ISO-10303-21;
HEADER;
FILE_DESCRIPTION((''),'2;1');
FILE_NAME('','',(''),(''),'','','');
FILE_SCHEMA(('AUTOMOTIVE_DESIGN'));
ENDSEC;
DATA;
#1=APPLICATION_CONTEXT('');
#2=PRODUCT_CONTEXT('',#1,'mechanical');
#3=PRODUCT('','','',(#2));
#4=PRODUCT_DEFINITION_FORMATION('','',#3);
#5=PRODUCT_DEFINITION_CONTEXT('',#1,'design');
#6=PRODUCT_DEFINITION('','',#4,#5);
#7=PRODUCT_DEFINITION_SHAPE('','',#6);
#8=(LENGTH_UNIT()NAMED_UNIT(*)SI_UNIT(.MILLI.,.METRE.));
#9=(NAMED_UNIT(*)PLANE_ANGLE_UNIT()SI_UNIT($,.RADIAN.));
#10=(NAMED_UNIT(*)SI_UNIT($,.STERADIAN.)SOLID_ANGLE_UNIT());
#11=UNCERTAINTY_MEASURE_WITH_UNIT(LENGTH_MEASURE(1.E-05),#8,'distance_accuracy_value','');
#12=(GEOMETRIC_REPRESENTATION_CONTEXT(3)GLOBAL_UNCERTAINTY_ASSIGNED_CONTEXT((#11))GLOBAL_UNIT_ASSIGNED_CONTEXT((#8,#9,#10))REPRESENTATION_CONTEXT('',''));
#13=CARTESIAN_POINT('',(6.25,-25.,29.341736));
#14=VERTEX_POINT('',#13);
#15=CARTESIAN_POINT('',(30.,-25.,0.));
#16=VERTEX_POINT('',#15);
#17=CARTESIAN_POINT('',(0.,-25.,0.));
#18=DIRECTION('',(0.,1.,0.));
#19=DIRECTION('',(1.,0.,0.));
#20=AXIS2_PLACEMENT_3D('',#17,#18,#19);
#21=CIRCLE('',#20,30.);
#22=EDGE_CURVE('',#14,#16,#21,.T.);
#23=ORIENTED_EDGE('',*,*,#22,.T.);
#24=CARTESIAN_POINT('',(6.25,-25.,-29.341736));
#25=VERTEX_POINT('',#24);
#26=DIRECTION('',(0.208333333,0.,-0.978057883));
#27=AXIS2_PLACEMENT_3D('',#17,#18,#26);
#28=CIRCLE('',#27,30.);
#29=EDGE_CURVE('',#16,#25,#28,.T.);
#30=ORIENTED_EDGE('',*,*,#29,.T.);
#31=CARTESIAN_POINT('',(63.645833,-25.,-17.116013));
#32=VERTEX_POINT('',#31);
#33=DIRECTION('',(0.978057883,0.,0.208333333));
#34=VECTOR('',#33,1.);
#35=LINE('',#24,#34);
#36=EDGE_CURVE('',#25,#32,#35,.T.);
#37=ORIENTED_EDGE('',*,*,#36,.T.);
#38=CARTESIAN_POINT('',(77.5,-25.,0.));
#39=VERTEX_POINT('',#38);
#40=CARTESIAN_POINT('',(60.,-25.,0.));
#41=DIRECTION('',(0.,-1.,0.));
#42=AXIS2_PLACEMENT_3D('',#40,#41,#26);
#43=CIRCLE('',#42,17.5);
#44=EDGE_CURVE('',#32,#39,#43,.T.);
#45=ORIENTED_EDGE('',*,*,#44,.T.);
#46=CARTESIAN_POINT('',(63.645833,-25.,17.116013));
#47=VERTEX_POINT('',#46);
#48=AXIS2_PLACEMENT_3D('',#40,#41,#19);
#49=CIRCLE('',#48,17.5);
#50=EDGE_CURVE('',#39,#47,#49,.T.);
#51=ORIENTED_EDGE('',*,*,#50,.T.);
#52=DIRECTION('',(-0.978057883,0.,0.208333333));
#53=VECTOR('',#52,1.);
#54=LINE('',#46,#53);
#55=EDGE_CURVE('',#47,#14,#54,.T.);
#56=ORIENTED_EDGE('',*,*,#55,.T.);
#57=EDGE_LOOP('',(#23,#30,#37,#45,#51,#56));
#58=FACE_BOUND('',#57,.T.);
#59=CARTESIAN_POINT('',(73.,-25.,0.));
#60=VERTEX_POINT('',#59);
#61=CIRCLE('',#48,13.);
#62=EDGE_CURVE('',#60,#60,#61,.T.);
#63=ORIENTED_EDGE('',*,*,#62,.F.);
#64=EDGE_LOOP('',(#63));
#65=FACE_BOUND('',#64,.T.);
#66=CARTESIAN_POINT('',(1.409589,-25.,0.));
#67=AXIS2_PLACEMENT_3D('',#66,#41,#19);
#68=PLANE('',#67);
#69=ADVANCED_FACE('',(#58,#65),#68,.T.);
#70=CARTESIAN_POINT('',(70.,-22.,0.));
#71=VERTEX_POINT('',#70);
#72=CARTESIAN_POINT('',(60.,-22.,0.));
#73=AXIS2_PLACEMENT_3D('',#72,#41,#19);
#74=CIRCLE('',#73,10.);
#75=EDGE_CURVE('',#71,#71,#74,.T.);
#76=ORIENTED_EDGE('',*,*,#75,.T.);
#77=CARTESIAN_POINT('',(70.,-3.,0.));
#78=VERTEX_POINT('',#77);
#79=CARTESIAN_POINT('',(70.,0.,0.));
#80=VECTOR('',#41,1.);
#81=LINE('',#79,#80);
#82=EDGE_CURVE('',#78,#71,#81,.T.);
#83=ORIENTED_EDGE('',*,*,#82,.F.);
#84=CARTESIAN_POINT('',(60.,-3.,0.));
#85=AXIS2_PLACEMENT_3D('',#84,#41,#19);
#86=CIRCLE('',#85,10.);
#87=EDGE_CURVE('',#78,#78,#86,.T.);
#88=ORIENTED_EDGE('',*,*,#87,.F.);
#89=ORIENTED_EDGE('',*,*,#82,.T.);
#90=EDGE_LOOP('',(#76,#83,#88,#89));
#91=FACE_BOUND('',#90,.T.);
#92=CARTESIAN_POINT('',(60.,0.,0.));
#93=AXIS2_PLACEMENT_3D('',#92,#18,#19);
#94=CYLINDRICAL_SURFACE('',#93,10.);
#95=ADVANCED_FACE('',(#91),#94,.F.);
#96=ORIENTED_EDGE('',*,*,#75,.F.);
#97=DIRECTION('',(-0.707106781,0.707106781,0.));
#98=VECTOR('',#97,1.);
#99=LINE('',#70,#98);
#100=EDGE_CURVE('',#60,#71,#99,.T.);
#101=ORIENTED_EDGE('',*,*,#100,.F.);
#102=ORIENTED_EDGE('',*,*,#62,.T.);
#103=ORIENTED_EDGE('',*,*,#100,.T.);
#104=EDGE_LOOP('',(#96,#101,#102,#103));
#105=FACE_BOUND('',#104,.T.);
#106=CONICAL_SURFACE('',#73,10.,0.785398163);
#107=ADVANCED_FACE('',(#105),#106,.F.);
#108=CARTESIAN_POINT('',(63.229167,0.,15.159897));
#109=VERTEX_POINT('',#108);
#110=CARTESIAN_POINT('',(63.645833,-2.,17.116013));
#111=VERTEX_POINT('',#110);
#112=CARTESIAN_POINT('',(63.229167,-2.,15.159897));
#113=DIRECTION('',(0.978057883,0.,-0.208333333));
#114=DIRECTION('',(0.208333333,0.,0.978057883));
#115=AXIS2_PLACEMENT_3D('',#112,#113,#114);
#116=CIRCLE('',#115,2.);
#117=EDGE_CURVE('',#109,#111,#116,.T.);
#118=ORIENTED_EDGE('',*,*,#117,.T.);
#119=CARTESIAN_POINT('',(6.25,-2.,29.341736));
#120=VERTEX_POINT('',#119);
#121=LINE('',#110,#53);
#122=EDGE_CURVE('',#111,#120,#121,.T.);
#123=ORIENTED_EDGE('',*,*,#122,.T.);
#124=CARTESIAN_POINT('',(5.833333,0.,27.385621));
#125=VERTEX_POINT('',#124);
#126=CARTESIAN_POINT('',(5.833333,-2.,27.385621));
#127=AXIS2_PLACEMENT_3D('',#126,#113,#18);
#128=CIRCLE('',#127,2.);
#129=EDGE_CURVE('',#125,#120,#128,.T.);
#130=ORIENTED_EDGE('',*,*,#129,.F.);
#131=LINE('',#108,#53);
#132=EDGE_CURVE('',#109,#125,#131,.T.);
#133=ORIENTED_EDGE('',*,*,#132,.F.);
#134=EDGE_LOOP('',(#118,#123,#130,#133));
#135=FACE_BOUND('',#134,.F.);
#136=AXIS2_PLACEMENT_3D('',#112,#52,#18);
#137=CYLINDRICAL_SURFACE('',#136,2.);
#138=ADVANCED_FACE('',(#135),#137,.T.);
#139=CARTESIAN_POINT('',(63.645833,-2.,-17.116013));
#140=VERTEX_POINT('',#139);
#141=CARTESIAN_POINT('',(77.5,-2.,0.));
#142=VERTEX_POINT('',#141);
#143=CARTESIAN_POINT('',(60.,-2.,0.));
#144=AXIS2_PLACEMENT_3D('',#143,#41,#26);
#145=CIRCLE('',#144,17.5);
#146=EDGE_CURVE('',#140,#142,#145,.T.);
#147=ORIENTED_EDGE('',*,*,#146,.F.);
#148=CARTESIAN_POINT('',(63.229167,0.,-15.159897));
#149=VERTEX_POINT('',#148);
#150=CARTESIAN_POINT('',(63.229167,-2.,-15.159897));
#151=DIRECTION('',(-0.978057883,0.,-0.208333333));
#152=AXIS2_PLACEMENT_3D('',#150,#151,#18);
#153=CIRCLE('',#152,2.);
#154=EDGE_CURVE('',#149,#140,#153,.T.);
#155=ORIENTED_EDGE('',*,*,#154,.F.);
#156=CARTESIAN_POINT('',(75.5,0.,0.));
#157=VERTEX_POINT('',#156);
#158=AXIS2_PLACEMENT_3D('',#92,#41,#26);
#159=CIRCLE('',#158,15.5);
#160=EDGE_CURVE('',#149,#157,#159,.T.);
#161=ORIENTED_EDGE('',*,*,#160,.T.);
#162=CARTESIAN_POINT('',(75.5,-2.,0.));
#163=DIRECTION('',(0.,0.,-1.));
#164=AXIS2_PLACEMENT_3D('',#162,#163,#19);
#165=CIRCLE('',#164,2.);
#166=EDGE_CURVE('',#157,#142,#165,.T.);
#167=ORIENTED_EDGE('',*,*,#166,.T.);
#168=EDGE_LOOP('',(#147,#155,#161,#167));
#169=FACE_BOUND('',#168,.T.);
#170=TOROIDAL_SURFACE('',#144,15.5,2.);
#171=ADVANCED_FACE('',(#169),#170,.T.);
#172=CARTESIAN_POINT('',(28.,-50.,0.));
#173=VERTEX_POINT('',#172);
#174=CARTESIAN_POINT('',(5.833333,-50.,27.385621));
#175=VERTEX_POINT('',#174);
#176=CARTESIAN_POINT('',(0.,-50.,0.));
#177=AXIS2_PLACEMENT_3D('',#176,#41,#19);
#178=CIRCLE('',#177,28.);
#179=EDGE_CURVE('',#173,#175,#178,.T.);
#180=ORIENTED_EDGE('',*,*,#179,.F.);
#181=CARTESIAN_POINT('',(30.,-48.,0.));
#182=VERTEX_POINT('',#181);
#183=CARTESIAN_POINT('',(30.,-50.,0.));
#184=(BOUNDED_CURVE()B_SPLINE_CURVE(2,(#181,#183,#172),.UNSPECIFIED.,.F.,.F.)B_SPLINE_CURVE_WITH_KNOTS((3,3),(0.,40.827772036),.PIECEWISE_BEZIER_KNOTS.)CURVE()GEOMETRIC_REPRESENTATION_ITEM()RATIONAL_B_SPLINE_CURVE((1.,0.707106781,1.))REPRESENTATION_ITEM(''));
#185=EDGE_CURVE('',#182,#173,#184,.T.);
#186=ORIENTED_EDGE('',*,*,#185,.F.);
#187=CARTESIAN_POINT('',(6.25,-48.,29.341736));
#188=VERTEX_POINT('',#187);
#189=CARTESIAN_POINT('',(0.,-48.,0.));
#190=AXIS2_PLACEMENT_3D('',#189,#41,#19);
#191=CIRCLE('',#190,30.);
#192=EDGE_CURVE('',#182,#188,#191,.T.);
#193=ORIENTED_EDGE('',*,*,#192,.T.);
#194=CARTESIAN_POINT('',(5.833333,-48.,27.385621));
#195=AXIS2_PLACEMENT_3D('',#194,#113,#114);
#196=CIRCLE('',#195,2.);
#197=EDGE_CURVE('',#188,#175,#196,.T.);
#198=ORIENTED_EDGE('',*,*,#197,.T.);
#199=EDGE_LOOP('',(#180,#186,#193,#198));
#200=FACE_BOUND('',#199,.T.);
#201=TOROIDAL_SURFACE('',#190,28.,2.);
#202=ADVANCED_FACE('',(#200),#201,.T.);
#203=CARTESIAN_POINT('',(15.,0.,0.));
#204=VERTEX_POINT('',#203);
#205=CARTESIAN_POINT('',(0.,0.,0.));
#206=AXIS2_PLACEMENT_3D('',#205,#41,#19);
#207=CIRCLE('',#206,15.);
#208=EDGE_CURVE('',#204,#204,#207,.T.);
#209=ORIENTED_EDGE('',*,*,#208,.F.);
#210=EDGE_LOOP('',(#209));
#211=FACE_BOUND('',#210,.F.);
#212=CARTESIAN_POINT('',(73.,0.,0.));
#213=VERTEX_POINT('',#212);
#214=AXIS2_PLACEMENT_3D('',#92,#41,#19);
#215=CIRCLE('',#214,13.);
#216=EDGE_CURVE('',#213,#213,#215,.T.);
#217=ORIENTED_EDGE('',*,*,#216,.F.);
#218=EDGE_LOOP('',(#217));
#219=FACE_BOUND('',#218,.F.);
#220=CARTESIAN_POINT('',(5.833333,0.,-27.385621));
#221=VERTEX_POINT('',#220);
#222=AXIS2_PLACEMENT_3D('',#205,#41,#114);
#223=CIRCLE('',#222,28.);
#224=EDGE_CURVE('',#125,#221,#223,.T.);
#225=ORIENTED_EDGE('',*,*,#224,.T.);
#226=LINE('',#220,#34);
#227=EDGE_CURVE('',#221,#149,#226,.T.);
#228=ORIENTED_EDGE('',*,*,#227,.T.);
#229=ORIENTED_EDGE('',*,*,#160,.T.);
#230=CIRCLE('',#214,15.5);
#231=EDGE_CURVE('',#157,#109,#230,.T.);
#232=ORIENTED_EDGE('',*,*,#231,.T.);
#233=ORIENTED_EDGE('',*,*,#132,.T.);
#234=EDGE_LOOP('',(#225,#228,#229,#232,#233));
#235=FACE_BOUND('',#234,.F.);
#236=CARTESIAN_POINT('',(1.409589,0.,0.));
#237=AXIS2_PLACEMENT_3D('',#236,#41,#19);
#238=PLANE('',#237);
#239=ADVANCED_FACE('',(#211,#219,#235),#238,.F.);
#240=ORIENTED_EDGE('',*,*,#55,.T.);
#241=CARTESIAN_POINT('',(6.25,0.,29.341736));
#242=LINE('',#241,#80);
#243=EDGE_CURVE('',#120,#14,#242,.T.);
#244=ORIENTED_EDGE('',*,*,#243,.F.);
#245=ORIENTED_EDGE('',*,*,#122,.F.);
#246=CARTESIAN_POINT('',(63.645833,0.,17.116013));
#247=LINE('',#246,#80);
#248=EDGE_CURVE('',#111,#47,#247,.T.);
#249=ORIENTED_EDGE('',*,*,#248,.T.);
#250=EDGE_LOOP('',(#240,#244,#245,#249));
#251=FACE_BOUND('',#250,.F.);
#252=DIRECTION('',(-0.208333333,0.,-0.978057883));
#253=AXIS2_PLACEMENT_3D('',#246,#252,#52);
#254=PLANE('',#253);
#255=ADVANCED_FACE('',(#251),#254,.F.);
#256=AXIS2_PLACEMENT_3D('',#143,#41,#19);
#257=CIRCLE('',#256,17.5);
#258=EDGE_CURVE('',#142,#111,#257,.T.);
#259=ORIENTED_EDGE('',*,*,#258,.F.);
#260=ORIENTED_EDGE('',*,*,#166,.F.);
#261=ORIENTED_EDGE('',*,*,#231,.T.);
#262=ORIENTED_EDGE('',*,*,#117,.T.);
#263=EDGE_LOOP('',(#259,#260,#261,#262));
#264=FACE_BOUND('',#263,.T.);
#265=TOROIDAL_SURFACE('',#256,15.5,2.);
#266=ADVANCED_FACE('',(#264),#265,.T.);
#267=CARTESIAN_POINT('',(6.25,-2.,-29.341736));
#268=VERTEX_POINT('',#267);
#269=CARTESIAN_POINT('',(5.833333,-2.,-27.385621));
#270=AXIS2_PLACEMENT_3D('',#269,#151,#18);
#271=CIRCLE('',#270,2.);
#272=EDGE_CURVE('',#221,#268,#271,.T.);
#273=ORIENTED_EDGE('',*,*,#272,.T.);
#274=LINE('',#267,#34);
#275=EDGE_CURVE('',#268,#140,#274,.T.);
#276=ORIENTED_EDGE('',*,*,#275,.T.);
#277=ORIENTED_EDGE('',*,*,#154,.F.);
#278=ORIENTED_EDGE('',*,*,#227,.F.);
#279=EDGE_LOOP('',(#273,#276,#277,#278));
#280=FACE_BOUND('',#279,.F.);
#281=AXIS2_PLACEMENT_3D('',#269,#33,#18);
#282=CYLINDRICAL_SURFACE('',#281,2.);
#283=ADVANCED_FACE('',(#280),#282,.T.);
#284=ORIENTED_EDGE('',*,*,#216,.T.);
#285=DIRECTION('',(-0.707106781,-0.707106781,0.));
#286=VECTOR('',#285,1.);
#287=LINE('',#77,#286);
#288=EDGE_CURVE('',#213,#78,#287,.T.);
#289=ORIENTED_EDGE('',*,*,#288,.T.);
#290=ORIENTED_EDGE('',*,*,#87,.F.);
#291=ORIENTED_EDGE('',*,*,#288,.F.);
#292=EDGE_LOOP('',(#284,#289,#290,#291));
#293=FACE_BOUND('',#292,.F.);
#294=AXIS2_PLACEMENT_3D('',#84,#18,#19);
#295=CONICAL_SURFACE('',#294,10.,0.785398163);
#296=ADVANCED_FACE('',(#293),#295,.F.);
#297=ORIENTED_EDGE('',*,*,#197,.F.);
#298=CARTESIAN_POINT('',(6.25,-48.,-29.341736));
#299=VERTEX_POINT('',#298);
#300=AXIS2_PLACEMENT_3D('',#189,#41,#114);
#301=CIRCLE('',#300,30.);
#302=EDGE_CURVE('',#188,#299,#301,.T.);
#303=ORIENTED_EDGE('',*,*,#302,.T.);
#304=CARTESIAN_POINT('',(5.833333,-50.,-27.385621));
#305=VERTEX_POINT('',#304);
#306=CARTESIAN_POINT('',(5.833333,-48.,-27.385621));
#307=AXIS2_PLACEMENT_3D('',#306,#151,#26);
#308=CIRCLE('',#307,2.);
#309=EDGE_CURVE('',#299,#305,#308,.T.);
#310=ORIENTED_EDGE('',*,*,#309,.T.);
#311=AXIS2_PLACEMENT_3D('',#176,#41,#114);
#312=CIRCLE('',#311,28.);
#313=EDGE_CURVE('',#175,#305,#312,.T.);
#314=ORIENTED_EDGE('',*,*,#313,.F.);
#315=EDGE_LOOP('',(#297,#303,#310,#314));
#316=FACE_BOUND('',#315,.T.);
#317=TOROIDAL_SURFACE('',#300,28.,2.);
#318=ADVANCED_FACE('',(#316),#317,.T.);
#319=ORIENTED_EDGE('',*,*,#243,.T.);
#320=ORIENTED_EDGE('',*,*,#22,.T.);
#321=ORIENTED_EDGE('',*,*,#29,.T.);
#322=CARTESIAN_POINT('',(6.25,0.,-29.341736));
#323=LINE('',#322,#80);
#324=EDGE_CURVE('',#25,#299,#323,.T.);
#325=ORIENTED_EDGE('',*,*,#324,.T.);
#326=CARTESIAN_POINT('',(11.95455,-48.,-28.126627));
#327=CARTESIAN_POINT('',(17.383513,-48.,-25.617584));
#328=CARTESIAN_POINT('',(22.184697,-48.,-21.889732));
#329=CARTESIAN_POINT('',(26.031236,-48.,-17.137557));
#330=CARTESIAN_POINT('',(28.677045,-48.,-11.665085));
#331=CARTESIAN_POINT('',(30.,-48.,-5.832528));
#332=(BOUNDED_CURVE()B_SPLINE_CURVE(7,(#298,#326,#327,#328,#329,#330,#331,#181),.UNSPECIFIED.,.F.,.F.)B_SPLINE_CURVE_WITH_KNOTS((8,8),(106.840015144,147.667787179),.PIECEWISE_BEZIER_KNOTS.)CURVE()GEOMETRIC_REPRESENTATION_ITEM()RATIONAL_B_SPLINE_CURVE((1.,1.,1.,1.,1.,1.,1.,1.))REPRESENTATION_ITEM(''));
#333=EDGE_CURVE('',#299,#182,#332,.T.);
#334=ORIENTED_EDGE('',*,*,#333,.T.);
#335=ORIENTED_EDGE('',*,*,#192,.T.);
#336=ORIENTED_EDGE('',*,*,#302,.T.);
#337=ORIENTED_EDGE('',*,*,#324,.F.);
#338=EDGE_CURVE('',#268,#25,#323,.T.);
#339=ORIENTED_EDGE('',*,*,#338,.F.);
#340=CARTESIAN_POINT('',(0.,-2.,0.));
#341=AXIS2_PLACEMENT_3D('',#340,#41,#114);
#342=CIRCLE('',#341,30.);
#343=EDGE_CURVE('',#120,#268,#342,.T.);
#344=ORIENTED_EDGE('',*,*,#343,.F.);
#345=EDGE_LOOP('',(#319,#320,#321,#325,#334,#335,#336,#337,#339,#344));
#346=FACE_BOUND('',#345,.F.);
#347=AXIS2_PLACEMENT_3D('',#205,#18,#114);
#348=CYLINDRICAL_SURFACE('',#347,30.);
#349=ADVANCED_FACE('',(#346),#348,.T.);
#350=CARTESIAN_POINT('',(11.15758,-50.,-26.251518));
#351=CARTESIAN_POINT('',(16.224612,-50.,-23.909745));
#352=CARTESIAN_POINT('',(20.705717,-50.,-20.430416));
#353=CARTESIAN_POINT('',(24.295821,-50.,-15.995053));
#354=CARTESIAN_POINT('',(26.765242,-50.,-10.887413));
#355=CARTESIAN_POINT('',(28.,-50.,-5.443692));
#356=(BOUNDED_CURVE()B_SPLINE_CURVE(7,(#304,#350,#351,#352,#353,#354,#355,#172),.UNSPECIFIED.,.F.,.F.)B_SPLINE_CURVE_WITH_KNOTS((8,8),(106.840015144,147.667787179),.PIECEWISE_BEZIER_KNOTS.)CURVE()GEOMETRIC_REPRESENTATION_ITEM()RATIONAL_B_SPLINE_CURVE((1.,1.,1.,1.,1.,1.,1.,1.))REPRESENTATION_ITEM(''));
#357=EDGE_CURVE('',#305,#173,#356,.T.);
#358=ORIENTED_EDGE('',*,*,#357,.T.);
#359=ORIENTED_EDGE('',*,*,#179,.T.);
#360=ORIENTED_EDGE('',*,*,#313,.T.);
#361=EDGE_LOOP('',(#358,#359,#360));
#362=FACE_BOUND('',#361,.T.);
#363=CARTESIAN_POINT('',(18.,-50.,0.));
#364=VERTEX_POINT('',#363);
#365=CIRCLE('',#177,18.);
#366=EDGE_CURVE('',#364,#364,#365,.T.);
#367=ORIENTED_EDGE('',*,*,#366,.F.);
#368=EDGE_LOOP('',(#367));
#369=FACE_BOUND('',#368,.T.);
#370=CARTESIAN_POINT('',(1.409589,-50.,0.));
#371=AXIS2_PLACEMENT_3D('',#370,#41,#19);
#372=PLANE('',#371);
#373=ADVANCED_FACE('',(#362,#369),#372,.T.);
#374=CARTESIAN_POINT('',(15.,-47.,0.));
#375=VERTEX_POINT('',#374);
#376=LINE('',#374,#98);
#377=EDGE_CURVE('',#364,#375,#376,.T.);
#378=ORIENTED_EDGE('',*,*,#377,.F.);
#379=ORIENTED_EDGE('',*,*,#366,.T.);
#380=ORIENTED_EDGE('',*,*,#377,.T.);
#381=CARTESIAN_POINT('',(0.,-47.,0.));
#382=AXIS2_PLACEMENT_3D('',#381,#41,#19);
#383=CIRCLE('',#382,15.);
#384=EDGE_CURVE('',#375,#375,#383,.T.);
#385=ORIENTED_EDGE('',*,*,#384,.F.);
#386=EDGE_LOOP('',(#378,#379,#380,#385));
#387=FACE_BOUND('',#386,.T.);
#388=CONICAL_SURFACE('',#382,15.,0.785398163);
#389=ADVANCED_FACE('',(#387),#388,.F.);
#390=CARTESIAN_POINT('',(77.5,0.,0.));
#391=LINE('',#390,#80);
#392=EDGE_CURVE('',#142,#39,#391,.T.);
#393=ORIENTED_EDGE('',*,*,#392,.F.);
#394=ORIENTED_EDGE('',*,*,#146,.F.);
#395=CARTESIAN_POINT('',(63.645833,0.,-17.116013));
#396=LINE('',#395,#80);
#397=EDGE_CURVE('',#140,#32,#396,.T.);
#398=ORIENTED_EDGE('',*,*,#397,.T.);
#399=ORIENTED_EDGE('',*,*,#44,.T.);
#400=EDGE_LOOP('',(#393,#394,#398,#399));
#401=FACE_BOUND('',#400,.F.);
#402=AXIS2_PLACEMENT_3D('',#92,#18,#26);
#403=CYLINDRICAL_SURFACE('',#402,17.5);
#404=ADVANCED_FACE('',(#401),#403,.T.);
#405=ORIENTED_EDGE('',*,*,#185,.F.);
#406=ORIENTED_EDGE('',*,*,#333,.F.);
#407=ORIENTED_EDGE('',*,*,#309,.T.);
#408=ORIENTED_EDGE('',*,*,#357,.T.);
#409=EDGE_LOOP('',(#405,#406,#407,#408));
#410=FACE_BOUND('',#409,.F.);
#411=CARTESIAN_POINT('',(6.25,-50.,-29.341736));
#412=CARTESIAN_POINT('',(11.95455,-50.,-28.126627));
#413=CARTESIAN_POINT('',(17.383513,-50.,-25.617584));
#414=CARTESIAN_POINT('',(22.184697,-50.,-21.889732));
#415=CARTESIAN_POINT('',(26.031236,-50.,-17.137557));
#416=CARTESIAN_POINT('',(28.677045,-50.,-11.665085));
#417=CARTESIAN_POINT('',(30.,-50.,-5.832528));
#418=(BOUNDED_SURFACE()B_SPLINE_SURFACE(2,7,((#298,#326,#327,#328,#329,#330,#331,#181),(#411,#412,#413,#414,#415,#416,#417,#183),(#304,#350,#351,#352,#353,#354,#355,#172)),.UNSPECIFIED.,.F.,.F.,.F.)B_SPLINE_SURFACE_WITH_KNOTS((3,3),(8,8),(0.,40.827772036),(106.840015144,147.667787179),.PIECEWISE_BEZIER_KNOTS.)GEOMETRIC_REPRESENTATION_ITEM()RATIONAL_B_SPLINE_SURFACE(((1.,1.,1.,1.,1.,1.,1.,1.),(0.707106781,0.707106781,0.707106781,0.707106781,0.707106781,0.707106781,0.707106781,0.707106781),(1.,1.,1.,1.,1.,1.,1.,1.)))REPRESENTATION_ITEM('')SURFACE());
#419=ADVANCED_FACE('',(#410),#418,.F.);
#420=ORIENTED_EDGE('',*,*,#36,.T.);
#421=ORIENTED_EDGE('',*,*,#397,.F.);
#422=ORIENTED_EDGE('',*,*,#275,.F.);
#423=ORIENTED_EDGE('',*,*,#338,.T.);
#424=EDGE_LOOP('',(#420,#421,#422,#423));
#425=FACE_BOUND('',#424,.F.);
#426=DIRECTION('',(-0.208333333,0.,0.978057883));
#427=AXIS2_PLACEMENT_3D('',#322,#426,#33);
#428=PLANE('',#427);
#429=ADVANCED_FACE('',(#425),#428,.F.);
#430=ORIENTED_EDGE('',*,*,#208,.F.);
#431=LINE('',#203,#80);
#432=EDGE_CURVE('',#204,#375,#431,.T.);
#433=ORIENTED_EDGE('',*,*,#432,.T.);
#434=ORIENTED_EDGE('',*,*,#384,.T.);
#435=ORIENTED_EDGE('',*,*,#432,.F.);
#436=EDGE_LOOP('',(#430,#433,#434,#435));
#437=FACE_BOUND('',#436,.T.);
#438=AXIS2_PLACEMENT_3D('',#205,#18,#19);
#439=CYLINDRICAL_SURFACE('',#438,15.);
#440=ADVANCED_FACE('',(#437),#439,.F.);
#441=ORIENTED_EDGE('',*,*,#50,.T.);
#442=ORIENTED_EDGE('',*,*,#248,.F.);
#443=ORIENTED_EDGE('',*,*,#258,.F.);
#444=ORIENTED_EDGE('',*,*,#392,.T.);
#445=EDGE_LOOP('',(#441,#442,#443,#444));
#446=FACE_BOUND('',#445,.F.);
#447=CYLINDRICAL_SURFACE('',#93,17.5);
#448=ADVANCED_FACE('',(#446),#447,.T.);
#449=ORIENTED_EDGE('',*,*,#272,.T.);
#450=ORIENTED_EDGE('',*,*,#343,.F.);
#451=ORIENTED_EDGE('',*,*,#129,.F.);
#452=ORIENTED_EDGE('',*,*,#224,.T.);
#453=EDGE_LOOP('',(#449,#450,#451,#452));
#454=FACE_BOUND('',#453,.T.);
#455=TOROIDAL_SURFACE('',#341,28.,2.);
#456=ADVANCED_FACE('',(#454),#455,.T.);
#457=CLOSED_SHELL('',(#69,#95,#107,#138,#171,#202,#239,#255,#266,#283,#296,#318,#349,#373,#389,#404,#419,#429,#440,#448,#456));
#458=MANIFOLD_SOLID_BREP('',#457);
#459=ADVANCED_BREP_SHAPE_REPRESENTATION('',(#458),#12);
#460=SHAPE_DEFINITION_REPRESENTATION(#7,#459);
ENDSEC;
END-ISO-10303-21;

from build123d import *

# Parameters (mm, degrees)
F0_R     = 15
F0_R_2   = 10
F1_DEPTH = 25
F2_DEPTH = 50
F3_R     = 2
F4_SIZE  = 3


# Not quite as in the source:
# - a feature names something its author has since deleted; it is built from what else it names


with BuildPart() as f1:
    # F0 (on Front) → F1 (new body)
    with BuildSketch(Plane.XZ):
        with BuildLine():
            ThreePointArc((6.25, -29.3417364858), (23.3184476327, -18.8745860882), (30, 0))
            ThreePointArc((30, 0), (23.3184476327, 18.8745860882), (6.25, 29.3417364858))
            ThreePointArc((6.25, 29.3417364858), (-30, 0), (6.25, -29.3417364858))
        make_face()
        Circle(F0_R, mode=Mode.SUBTRACT)
        with BuildLine():
            ThreePointArc((6.25, 29.3417364858), (23.3184476327, 18.8745860882), (30, 0))
            ThreePointArc((30, 0), (23.3184476327, -18.8745860882), (6.25, -29.3417364858))
            Line((6.25, -29.3417364858), (63.6458333333, -17.11601295))
            ThreePointArc((63.6458333333, -17.11601295), (42.5, 0), (63.6458333333, 17.11601295))
            Line((63.6458333333, 17.11601295), (6.25, 29.3417364858))
        make_face()
        with BuildLine():
            ThreePointArc((77.5, 0), (73.6024277858, 11.0101752181), (63.6458333333, 17.11601295))
            ThreePointArc((63.6458333333, 17.11601295), (42.5, 0), (63.6458333333, -17.11601295))
            ThreePointArc((63.6458333333, -17.11601295), (73.6024277858, -11.0101752181), (77.5, 0))
        make_face()
        with Locations((60, 0)):
            Circle(F0_R_2, mode=Mode.SUBTRACT)
    extrude(amount=F1_DEPTH)

    # F0 (on Front) → F2 (join)
    with BuildSketch(Plane.XZ):
        with BuildLine():
            ThreePointArc((6.25, -29.3417364858), (23.3184476327, -18.8745860882), (30, 0))
            ThreePointArc((30, 0), (23.3184476327, 18.8745860882), (6.25, 29.3417364858))
            ThreePointArc((6.25, 29.3417364858), (-30, 0), (6.25, -29.3417364858))
        make_face()
        Circle(F0_R, mode=Mode.SUBTRACT)
    extrude(amount=F2_DEPTH)

    # F3
    f3_edges = [f1.edges().sort_by_distance(p)[0] for p in [
        (-6.25, -50, 29.341736),
        (34.947917, 0, -23.228875),
    ]]
    fillet(f3_edges, radius=F3_R)

    # F4
    f4_edges = [f1.edges().sort_by_distance(p)[0] for p in [
        (-15, -50, 0),
        (70, -12.5, 0),
        (50, 0, 0),
        (50, -25, 0),
    ]]
    chamfer(f4_edges, length=F4_SIZE)


solid = f1.part
